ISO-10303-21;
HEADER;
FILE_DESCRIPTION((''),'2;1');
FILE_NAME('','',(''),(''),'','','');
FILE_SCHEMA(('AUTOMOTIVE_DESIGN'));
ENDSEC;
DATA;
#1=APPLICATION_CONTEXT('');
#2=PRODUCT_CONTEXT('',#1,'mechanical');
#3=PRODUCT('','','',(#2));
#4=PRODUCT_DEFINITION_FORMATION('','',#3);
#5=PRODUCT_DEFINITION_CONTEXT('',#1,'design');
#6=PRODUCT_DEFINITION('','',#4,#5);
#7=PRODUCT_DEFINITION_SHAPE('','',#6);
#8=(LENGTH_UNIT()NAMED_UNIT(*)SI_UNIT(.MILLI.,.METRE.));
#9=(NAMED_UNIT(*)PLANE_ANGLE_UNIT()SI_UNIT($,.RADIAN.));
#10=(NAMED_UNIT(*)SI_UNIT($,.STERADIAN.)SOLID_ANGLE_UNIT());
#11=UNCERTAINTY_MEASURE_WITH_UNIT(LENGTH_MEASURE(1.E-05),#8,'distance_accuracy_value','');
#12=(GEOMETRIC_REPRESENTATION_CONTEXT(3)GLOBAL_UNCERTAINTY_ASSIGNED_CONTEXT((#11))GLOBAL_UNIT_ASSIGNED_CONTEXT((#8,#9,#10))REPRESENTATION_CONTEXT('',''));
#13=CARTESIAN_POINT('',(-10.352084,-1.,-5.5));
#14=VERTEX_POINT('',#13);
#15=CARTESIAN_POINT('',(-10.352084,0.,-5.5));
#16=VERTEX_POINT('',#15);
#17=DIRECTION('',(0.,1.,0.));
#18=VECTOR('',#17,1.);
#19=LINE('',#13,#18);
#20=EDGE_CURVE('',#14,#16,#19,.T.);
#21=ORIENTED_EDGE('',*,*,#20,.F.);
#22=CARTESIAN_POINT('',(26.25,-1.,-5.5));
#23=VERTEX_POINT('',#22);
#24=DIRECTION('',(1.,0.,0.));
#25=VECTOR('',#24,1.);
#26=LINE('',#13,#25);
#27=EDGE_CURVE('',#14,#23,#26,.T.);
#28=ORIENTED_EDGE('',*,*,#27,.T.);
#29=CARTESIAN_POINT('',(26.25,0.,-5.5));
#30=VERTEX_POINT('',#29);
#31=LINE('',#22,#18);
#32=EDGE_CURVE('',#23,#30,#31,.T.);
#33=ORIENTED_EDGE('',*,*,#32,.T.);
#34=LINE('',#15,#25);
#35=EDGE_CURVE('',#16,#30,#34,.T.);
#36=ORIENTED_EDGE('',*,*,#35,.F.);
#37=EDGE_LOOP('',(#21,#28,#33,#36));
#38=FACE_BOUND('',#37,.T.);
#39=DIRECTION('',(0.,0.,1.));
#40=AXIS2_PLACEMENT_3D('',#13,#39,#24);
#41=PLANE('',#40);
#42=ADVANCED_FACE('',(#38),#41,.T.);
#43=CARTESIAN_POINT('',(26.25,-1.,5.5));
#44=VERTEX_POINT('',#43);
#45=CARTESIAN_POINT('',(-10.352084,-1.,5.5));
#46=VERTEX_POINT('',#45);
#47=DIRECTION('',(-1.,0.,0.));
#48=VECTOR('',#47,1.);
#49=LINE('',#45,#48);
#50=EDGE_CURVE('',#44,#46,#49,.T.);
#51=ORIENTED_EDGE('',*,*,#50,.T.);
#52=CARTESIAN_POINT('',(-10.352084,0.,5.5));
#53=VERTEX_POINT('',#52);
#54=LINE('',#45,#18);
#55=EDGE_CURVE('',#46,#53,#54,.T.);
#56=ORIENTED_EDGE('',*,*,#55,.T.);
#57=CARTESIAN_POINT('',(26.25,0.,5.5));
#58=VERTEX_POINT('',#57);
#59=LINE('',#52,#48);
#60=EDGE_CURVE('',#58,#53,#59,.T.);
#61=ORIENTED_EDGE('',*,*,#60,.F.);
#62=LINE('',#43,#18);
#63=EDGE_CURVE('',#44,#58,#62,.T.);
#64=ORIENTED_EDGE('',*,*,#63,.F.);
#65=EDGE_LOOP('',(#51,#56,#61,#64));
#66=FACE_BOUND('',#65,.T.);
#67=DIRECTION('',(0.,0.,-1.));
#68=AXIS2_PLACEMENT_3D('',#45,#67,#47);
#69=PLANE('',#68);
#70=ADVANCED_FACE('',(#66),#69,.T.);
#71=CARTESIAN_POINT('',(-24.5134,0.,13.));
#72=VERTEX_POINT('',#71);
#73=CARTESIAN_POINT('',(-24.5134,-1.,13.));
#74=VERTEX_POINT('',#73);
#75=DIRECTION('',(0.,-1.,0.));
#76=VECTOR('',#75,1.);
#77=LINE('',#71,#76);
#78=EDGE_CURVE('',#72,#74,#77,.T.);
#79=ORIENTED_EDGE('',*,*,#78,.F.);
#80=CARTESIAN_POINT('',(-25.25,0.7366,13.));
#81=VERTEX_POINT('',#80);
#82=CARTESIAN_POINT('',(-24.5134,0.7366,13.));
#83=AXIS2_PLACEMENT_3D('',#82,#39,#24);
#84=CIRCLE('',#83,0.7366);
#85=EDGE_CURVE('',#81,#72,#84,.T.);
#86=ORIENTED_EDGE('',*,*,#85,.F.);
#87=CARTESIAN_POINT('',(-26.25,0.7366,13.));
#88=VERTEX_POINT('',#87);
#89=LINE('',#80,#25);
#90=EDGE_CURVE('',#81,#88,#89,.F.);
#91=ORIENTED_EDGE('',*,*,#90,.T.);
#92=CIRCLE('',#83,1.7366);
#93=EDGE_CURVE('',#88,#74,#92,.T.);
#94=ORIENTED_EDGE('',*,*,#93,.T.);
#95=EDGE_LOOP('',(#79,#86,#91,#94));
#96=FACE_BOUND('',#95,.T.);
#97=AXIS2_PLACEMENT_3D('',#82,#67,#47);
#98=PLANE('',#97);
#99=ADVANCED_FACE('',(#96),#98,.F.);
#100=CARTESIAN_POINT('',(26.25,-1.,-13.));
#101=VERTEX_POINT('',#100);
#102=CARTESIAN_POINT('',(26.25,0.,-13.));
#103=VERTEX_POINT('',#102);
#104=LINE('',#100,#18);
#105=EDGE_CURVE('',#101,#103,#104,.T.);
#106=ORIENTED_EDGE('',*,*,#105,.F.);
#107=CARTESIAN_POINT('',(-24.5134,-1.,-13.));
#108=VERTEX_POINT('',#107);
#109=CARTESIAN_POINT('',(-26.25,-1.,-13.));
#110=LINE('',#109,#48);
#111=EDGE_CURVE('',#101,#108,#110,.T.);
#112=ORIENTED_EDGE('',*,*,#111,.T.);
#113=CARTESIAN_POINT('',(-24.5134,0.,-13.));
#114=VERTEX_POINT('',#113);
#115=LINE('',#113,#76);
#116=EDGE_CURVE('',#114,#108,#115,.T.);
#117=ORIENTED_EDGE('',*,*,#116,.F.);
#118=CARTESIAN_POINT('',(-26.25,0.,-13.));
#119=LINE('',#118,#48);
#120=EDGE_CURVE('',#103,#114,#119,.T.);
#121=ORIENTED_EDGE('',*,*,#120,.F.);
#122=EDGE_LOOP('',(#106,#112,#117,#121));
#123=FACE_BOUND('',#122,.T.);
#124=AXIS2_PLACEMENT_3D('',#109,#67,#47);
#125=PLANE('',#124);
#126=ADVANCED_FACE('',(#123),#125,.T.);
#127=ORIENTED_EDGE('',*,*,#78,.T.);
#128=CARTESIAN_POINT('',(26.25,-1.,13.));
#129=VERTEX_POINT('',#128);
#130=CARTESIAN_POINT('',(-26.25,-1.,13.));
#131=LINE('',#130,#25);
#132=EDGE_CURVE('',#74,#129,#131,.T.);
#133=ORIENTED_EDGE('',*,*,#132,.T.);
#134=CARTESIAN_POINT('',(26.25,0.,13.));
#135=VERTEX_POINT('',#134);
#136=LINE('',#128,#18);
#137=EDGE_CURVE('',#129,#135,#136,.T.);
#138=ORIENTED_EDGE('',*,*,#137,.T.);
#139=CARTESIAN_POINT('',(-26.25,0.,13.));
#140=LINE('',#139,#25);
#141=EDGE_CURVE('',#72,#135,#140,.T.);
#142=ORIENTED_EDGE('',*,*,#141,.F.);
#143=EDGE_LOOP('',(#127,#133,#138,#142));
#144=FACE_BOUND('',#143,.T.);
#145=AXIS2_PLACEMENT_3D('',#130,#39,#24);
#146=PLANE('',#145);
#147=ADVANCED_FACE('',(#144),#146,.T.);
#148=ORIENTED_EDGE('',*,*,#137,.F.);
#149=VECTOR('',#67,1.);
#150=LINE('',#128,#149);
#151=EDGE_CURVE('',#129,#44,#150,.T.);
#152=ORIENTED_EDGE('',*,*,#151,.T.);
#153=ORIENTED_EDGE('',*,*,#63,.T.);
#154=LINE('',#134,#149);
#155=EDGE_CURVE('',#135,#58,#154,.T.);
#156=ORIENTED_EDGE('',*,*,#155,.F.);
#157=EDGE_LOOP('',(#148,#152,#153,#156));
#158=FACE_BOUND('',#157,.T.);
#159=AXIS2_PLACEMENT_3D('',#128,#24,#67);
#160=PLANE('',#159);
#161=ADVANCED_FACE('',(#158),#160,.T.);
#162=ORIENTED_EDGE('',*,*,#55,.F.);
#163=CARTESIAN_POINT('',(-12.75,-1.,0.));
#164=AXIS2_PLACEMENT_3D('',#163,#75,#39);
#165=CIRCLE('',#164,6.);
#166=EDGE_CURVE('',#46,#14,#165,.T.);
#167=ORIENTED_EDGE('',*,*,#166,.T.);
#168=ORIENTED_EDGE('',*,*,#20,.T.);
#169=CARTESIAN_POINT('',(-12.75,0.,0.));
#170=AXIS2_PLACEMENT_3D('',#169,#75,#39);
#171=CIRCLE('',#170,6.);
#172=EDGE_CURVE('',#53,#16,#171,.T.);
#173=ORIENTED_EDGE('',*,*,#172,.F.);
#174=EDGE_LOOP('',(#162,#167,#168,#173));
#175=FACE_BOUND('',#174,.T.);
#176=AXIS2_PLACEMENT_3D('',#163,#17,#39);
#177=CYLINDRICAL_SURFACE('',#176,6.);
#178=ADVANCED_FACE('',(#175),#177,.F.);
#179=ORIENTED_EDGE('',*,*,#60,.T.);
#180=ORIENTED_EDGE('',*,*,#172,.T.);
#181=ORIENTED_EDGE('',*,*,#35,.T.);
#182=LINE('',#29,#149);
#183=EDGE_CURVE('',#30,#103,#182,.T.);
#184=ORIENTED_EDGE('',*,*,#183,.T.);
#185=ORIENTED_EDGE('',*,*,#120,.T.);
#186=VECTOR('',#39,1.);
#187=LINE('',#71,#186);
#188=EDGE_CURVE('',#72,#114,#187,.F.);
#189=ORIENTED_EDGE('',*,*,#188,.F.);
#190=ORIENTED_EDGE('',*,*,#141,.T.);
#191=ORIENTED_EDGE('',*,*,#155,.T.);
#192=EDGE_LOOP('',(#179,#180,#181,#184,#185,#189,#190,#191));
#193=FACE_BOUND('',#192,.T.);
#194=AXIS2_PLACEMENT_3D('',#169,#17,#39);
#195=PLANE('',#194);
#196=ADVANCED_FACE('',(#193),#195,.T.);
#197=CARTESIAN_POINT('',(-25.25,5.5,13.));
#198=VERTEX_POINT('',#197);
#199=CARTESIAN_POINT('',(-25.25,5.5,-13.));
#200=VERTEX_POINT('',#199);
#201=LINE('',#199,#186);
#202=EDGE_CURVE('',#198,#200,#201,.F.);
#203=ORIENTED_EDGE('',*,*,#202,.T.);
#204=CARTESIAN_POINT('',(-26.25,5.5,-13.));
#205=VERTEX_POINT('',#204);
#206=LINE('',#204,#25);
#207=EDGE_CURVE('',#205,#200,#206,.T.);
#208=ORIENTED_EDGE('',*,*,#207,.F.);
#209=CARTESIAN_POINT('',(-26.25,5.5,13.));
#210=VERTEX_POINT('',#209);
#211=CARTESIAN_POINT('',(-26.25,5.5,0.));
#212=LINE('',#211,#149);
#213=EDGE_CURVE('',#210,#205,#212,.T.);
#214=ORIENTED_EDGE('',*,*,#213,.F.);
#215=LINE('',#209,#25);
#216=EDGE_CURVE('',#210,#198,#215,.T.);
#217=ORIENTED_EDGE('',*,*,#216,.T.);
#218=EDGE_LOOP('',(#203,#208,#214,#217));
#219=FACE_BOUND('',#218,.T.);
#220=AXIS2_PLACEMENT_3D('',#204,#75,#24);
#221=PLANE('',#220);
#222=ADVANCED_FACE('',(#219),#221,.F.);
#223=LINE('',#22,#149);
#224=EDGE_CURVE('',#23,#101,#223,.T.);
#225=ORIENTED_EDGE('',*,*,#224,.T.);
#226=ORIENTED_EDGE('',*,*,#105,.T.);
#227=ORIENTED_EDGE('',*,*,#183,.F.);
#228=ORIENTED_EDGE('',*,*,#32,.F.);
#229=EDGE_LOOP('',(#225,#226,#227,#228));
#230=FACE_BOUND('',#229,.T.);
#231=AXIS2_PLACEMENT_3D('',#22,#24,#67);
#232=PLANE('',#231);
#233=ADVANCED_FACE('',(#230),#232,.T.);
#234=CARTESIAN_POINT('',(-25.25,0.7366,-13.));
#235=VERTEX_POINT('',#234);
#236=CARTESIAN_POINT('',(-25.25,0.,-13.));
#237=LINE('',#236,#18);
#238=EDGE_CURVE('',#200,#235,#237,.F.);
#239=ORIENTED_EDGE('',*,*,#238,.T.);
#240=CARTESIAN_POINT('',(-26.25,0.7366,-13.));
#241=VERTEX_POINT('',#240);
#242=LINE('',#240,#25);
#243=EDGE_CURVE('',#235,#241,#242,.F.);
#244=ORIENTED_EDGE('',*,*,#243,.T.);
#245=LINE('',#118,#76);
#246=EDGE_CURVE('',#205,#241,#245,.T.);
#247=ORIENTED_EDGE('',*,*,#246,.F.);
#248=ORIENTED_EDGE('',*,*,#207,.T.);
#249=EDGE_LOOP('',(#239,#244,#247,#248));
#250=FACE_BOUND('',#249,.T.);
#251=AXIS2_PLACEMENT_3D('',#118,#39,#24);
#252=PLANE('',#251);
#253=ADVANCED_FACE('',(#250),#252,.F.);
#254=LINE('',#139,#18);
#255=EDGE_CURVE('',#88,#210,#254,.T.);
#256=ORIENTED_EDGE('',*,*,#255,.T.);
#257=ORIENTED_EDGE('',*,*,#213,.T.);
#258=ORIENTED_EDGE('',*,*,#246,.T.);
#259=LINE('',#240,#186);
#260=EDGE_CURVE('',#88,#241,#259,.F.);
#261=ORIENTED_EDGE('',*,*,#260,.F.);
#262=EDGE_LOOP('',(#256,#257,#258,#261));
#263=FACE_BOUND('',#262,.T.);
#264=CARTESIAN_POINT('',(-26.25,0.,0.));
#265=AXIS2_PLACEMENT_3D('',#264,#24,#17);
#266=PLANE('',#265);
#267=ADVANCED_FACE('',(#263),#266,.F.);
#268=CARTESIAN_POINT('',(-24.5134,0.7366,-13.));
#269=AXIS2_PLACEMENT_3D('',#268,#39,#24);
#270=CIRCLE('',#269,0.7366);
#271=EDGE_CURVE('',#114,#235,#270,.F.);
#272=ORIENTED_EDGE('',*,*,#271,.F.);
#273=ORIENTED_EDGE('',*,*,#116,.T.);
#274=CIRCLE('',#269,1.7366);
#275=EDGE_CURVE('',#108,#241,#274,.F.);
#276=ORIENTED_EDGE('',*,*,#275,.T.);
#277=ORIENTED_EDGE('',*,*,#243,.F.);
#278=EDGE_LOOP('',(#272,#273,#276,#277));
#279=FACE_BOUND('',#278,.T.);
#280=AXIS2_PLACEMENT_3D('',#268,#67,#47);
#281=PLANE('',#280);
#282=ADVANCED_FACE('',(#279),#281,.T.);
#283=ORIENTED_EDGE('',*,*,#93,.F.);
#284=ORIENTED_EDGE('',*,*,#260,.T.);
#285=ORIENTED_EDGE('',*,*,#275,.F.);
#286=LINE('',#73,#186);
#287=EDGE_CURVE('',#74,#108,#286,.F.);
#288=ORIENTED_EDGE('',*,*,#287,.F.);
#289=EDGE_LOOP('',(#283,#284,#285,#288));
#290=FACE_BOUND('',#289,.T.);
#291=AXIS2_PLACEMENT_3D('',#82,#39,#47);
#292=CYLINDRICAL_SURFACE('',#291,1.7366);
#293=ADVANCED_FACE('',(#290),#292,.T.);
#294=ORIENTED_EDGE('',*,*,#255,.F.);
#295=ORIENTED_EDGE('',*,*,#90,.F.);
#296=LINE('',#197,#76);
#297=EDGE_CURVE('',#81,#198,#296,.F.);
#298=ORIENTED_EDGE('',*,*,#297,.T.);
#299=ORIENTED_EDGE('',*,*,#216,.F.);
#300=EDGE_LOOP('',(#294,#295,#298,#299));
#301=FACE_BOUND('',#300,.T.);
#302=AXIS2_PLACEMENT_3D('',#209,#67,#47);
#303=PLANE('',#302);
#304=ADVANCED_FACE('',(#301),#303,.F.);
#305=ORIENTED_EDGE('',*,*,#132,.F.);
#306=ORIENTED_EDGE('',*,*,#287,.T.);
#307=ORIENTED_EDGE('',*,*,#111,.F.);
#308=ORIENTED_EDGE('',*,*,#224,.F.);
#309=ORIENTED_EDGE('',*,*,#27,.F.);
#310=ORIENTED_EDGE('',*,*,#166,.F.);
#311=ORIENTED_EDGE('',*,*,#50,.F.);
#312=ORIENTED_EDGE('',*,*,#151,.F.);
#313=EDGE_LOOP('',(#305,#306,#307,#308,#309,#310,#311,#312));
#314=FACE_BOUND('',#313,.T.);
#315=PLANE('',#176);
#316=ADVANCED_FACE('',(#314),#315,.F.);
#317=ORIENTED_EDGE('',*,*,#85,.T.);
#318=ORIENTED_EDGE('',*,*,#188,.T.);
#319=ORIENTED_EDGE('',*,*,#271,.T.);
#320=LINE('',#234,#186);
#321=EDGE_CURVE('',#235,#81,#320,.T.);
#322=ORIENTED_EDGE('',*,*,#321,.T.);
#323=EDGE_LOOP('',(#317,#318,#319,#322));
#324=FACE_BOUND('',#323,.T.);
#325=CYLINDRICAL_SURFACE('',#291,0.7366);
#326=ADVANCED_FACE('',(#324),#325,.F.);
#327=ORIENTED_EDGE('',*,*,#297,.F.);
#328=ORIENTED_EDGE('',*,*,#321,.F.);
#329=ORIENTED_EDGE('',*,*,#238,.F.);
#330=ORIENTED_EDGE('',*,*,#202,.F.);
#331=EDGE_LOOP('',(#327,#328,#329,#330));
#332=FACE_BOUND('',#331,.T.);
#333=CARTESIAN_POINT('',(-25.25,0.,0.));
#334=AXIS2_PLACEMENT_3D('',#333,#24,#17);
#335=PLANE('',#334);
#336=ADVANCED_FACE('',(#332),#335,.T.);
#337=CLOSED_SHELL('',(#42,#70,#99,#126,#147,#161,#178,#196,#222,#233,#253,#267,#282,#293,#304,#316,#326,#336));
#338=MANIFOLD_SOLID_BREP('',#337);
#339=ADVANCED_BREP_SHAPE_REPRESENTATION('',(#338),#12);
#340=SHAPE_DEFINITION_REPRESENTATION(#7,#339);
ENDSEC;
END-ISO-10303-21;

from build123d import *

# Parameters (mm, degrees)
T_LE_DE_BASE_PLI_E1_DEPTH             = 1
T_LE_PLI_E_SUR_AR_TE1_STRIP_W         = 5.4732
T_LE_PLI_E_SUR_AR_TE1_STRIP_H         = 1
T_LE_PLI_E_SUR_AR_TE1_STRIP_CUT_DEPTH = 26
T_LE_PLI_E_SUR_AR_TE1_DEPTH           = 26


# Sheet-metal steps are written as plain solids
with BuildPart() as part:
    # Esquisse1 → Tôle de base pliée1 (new body)
    with BuildSketch(Plane(origin=(0, 0, 0), x_dir=(1, 0, 0), z_dir=(0, 1, 0))):
        with BuildLine():
            Line((-26.25, -13), (26.25, -13))
            Line((26.25, -13), (26.25, -5.5))
            Line((26.25, -5.5), (-10.352084238, -5.5))
            ThreePointArc((-10.352084238, -5.5), (-18.75, 0), (-10.352084238, 5.5))
            Line((-10.352084238, 5.5), (26.25, 5.5))
            Line((26.25, 5.5), (26.25, 13))
            Line((26.25, 13), (-26.25, 13))
            Line((-26.25, 13), (-26.25, -13))
        make_face()
    extrude(amount=-T_LE_DE_BASE_PLI_E1_DEPTH)

    # Tôle pliée sur arête1 strip (across the edge) → Tôle pliée sur arête1 strip cut (cut)
    with BuildSketch(Plane(origin=(-26.25, 0, -13), x_dir=(1, 0, 0), z_dir=(0, 0, 1))):
        with Locations((-1, -0.5)):
            Rectangle(T_LE_PLI_E_SUR_AR_TE1_STRIP_W, T_LE_PLI_E_SUR_AR_TE1_STRIP_H)
    extrude(amount=T_LE_PLI_E_SUR_AR_TE1_STRIP_CUT_DEPTH, mode=Mode.SUBTRACT)

    # Tôle pliée sur arête1 section (across the edge) → Tôle pliée sur arête1 (add)
    with BuildSketch(Plane(origin=(-26.25, 0, -13), x_dir=(1, 0, 0), z_dir=(0, 0, 1))):
        with BuildLine():
            Line((0, 0.7366), (0, 5.5))
            Line((0, 5.5), (1, 5.5))
            Line((1, 5.5), (1, 0.7366))
            ThreePointArc((1, 0.7366), (1.215745145, 0.215745145), (1.7366, 0))
            Line((1.7366, 0), (1.7366, -1))
            ThreePointArc((1.7366, -1), (0.508638364, -0.491361636), (0, 0.7366))
        make_face()
    extrude(amount=T_LE_PLI_E_SUR_AR_TE1_DEPTH)


solid = part.part
